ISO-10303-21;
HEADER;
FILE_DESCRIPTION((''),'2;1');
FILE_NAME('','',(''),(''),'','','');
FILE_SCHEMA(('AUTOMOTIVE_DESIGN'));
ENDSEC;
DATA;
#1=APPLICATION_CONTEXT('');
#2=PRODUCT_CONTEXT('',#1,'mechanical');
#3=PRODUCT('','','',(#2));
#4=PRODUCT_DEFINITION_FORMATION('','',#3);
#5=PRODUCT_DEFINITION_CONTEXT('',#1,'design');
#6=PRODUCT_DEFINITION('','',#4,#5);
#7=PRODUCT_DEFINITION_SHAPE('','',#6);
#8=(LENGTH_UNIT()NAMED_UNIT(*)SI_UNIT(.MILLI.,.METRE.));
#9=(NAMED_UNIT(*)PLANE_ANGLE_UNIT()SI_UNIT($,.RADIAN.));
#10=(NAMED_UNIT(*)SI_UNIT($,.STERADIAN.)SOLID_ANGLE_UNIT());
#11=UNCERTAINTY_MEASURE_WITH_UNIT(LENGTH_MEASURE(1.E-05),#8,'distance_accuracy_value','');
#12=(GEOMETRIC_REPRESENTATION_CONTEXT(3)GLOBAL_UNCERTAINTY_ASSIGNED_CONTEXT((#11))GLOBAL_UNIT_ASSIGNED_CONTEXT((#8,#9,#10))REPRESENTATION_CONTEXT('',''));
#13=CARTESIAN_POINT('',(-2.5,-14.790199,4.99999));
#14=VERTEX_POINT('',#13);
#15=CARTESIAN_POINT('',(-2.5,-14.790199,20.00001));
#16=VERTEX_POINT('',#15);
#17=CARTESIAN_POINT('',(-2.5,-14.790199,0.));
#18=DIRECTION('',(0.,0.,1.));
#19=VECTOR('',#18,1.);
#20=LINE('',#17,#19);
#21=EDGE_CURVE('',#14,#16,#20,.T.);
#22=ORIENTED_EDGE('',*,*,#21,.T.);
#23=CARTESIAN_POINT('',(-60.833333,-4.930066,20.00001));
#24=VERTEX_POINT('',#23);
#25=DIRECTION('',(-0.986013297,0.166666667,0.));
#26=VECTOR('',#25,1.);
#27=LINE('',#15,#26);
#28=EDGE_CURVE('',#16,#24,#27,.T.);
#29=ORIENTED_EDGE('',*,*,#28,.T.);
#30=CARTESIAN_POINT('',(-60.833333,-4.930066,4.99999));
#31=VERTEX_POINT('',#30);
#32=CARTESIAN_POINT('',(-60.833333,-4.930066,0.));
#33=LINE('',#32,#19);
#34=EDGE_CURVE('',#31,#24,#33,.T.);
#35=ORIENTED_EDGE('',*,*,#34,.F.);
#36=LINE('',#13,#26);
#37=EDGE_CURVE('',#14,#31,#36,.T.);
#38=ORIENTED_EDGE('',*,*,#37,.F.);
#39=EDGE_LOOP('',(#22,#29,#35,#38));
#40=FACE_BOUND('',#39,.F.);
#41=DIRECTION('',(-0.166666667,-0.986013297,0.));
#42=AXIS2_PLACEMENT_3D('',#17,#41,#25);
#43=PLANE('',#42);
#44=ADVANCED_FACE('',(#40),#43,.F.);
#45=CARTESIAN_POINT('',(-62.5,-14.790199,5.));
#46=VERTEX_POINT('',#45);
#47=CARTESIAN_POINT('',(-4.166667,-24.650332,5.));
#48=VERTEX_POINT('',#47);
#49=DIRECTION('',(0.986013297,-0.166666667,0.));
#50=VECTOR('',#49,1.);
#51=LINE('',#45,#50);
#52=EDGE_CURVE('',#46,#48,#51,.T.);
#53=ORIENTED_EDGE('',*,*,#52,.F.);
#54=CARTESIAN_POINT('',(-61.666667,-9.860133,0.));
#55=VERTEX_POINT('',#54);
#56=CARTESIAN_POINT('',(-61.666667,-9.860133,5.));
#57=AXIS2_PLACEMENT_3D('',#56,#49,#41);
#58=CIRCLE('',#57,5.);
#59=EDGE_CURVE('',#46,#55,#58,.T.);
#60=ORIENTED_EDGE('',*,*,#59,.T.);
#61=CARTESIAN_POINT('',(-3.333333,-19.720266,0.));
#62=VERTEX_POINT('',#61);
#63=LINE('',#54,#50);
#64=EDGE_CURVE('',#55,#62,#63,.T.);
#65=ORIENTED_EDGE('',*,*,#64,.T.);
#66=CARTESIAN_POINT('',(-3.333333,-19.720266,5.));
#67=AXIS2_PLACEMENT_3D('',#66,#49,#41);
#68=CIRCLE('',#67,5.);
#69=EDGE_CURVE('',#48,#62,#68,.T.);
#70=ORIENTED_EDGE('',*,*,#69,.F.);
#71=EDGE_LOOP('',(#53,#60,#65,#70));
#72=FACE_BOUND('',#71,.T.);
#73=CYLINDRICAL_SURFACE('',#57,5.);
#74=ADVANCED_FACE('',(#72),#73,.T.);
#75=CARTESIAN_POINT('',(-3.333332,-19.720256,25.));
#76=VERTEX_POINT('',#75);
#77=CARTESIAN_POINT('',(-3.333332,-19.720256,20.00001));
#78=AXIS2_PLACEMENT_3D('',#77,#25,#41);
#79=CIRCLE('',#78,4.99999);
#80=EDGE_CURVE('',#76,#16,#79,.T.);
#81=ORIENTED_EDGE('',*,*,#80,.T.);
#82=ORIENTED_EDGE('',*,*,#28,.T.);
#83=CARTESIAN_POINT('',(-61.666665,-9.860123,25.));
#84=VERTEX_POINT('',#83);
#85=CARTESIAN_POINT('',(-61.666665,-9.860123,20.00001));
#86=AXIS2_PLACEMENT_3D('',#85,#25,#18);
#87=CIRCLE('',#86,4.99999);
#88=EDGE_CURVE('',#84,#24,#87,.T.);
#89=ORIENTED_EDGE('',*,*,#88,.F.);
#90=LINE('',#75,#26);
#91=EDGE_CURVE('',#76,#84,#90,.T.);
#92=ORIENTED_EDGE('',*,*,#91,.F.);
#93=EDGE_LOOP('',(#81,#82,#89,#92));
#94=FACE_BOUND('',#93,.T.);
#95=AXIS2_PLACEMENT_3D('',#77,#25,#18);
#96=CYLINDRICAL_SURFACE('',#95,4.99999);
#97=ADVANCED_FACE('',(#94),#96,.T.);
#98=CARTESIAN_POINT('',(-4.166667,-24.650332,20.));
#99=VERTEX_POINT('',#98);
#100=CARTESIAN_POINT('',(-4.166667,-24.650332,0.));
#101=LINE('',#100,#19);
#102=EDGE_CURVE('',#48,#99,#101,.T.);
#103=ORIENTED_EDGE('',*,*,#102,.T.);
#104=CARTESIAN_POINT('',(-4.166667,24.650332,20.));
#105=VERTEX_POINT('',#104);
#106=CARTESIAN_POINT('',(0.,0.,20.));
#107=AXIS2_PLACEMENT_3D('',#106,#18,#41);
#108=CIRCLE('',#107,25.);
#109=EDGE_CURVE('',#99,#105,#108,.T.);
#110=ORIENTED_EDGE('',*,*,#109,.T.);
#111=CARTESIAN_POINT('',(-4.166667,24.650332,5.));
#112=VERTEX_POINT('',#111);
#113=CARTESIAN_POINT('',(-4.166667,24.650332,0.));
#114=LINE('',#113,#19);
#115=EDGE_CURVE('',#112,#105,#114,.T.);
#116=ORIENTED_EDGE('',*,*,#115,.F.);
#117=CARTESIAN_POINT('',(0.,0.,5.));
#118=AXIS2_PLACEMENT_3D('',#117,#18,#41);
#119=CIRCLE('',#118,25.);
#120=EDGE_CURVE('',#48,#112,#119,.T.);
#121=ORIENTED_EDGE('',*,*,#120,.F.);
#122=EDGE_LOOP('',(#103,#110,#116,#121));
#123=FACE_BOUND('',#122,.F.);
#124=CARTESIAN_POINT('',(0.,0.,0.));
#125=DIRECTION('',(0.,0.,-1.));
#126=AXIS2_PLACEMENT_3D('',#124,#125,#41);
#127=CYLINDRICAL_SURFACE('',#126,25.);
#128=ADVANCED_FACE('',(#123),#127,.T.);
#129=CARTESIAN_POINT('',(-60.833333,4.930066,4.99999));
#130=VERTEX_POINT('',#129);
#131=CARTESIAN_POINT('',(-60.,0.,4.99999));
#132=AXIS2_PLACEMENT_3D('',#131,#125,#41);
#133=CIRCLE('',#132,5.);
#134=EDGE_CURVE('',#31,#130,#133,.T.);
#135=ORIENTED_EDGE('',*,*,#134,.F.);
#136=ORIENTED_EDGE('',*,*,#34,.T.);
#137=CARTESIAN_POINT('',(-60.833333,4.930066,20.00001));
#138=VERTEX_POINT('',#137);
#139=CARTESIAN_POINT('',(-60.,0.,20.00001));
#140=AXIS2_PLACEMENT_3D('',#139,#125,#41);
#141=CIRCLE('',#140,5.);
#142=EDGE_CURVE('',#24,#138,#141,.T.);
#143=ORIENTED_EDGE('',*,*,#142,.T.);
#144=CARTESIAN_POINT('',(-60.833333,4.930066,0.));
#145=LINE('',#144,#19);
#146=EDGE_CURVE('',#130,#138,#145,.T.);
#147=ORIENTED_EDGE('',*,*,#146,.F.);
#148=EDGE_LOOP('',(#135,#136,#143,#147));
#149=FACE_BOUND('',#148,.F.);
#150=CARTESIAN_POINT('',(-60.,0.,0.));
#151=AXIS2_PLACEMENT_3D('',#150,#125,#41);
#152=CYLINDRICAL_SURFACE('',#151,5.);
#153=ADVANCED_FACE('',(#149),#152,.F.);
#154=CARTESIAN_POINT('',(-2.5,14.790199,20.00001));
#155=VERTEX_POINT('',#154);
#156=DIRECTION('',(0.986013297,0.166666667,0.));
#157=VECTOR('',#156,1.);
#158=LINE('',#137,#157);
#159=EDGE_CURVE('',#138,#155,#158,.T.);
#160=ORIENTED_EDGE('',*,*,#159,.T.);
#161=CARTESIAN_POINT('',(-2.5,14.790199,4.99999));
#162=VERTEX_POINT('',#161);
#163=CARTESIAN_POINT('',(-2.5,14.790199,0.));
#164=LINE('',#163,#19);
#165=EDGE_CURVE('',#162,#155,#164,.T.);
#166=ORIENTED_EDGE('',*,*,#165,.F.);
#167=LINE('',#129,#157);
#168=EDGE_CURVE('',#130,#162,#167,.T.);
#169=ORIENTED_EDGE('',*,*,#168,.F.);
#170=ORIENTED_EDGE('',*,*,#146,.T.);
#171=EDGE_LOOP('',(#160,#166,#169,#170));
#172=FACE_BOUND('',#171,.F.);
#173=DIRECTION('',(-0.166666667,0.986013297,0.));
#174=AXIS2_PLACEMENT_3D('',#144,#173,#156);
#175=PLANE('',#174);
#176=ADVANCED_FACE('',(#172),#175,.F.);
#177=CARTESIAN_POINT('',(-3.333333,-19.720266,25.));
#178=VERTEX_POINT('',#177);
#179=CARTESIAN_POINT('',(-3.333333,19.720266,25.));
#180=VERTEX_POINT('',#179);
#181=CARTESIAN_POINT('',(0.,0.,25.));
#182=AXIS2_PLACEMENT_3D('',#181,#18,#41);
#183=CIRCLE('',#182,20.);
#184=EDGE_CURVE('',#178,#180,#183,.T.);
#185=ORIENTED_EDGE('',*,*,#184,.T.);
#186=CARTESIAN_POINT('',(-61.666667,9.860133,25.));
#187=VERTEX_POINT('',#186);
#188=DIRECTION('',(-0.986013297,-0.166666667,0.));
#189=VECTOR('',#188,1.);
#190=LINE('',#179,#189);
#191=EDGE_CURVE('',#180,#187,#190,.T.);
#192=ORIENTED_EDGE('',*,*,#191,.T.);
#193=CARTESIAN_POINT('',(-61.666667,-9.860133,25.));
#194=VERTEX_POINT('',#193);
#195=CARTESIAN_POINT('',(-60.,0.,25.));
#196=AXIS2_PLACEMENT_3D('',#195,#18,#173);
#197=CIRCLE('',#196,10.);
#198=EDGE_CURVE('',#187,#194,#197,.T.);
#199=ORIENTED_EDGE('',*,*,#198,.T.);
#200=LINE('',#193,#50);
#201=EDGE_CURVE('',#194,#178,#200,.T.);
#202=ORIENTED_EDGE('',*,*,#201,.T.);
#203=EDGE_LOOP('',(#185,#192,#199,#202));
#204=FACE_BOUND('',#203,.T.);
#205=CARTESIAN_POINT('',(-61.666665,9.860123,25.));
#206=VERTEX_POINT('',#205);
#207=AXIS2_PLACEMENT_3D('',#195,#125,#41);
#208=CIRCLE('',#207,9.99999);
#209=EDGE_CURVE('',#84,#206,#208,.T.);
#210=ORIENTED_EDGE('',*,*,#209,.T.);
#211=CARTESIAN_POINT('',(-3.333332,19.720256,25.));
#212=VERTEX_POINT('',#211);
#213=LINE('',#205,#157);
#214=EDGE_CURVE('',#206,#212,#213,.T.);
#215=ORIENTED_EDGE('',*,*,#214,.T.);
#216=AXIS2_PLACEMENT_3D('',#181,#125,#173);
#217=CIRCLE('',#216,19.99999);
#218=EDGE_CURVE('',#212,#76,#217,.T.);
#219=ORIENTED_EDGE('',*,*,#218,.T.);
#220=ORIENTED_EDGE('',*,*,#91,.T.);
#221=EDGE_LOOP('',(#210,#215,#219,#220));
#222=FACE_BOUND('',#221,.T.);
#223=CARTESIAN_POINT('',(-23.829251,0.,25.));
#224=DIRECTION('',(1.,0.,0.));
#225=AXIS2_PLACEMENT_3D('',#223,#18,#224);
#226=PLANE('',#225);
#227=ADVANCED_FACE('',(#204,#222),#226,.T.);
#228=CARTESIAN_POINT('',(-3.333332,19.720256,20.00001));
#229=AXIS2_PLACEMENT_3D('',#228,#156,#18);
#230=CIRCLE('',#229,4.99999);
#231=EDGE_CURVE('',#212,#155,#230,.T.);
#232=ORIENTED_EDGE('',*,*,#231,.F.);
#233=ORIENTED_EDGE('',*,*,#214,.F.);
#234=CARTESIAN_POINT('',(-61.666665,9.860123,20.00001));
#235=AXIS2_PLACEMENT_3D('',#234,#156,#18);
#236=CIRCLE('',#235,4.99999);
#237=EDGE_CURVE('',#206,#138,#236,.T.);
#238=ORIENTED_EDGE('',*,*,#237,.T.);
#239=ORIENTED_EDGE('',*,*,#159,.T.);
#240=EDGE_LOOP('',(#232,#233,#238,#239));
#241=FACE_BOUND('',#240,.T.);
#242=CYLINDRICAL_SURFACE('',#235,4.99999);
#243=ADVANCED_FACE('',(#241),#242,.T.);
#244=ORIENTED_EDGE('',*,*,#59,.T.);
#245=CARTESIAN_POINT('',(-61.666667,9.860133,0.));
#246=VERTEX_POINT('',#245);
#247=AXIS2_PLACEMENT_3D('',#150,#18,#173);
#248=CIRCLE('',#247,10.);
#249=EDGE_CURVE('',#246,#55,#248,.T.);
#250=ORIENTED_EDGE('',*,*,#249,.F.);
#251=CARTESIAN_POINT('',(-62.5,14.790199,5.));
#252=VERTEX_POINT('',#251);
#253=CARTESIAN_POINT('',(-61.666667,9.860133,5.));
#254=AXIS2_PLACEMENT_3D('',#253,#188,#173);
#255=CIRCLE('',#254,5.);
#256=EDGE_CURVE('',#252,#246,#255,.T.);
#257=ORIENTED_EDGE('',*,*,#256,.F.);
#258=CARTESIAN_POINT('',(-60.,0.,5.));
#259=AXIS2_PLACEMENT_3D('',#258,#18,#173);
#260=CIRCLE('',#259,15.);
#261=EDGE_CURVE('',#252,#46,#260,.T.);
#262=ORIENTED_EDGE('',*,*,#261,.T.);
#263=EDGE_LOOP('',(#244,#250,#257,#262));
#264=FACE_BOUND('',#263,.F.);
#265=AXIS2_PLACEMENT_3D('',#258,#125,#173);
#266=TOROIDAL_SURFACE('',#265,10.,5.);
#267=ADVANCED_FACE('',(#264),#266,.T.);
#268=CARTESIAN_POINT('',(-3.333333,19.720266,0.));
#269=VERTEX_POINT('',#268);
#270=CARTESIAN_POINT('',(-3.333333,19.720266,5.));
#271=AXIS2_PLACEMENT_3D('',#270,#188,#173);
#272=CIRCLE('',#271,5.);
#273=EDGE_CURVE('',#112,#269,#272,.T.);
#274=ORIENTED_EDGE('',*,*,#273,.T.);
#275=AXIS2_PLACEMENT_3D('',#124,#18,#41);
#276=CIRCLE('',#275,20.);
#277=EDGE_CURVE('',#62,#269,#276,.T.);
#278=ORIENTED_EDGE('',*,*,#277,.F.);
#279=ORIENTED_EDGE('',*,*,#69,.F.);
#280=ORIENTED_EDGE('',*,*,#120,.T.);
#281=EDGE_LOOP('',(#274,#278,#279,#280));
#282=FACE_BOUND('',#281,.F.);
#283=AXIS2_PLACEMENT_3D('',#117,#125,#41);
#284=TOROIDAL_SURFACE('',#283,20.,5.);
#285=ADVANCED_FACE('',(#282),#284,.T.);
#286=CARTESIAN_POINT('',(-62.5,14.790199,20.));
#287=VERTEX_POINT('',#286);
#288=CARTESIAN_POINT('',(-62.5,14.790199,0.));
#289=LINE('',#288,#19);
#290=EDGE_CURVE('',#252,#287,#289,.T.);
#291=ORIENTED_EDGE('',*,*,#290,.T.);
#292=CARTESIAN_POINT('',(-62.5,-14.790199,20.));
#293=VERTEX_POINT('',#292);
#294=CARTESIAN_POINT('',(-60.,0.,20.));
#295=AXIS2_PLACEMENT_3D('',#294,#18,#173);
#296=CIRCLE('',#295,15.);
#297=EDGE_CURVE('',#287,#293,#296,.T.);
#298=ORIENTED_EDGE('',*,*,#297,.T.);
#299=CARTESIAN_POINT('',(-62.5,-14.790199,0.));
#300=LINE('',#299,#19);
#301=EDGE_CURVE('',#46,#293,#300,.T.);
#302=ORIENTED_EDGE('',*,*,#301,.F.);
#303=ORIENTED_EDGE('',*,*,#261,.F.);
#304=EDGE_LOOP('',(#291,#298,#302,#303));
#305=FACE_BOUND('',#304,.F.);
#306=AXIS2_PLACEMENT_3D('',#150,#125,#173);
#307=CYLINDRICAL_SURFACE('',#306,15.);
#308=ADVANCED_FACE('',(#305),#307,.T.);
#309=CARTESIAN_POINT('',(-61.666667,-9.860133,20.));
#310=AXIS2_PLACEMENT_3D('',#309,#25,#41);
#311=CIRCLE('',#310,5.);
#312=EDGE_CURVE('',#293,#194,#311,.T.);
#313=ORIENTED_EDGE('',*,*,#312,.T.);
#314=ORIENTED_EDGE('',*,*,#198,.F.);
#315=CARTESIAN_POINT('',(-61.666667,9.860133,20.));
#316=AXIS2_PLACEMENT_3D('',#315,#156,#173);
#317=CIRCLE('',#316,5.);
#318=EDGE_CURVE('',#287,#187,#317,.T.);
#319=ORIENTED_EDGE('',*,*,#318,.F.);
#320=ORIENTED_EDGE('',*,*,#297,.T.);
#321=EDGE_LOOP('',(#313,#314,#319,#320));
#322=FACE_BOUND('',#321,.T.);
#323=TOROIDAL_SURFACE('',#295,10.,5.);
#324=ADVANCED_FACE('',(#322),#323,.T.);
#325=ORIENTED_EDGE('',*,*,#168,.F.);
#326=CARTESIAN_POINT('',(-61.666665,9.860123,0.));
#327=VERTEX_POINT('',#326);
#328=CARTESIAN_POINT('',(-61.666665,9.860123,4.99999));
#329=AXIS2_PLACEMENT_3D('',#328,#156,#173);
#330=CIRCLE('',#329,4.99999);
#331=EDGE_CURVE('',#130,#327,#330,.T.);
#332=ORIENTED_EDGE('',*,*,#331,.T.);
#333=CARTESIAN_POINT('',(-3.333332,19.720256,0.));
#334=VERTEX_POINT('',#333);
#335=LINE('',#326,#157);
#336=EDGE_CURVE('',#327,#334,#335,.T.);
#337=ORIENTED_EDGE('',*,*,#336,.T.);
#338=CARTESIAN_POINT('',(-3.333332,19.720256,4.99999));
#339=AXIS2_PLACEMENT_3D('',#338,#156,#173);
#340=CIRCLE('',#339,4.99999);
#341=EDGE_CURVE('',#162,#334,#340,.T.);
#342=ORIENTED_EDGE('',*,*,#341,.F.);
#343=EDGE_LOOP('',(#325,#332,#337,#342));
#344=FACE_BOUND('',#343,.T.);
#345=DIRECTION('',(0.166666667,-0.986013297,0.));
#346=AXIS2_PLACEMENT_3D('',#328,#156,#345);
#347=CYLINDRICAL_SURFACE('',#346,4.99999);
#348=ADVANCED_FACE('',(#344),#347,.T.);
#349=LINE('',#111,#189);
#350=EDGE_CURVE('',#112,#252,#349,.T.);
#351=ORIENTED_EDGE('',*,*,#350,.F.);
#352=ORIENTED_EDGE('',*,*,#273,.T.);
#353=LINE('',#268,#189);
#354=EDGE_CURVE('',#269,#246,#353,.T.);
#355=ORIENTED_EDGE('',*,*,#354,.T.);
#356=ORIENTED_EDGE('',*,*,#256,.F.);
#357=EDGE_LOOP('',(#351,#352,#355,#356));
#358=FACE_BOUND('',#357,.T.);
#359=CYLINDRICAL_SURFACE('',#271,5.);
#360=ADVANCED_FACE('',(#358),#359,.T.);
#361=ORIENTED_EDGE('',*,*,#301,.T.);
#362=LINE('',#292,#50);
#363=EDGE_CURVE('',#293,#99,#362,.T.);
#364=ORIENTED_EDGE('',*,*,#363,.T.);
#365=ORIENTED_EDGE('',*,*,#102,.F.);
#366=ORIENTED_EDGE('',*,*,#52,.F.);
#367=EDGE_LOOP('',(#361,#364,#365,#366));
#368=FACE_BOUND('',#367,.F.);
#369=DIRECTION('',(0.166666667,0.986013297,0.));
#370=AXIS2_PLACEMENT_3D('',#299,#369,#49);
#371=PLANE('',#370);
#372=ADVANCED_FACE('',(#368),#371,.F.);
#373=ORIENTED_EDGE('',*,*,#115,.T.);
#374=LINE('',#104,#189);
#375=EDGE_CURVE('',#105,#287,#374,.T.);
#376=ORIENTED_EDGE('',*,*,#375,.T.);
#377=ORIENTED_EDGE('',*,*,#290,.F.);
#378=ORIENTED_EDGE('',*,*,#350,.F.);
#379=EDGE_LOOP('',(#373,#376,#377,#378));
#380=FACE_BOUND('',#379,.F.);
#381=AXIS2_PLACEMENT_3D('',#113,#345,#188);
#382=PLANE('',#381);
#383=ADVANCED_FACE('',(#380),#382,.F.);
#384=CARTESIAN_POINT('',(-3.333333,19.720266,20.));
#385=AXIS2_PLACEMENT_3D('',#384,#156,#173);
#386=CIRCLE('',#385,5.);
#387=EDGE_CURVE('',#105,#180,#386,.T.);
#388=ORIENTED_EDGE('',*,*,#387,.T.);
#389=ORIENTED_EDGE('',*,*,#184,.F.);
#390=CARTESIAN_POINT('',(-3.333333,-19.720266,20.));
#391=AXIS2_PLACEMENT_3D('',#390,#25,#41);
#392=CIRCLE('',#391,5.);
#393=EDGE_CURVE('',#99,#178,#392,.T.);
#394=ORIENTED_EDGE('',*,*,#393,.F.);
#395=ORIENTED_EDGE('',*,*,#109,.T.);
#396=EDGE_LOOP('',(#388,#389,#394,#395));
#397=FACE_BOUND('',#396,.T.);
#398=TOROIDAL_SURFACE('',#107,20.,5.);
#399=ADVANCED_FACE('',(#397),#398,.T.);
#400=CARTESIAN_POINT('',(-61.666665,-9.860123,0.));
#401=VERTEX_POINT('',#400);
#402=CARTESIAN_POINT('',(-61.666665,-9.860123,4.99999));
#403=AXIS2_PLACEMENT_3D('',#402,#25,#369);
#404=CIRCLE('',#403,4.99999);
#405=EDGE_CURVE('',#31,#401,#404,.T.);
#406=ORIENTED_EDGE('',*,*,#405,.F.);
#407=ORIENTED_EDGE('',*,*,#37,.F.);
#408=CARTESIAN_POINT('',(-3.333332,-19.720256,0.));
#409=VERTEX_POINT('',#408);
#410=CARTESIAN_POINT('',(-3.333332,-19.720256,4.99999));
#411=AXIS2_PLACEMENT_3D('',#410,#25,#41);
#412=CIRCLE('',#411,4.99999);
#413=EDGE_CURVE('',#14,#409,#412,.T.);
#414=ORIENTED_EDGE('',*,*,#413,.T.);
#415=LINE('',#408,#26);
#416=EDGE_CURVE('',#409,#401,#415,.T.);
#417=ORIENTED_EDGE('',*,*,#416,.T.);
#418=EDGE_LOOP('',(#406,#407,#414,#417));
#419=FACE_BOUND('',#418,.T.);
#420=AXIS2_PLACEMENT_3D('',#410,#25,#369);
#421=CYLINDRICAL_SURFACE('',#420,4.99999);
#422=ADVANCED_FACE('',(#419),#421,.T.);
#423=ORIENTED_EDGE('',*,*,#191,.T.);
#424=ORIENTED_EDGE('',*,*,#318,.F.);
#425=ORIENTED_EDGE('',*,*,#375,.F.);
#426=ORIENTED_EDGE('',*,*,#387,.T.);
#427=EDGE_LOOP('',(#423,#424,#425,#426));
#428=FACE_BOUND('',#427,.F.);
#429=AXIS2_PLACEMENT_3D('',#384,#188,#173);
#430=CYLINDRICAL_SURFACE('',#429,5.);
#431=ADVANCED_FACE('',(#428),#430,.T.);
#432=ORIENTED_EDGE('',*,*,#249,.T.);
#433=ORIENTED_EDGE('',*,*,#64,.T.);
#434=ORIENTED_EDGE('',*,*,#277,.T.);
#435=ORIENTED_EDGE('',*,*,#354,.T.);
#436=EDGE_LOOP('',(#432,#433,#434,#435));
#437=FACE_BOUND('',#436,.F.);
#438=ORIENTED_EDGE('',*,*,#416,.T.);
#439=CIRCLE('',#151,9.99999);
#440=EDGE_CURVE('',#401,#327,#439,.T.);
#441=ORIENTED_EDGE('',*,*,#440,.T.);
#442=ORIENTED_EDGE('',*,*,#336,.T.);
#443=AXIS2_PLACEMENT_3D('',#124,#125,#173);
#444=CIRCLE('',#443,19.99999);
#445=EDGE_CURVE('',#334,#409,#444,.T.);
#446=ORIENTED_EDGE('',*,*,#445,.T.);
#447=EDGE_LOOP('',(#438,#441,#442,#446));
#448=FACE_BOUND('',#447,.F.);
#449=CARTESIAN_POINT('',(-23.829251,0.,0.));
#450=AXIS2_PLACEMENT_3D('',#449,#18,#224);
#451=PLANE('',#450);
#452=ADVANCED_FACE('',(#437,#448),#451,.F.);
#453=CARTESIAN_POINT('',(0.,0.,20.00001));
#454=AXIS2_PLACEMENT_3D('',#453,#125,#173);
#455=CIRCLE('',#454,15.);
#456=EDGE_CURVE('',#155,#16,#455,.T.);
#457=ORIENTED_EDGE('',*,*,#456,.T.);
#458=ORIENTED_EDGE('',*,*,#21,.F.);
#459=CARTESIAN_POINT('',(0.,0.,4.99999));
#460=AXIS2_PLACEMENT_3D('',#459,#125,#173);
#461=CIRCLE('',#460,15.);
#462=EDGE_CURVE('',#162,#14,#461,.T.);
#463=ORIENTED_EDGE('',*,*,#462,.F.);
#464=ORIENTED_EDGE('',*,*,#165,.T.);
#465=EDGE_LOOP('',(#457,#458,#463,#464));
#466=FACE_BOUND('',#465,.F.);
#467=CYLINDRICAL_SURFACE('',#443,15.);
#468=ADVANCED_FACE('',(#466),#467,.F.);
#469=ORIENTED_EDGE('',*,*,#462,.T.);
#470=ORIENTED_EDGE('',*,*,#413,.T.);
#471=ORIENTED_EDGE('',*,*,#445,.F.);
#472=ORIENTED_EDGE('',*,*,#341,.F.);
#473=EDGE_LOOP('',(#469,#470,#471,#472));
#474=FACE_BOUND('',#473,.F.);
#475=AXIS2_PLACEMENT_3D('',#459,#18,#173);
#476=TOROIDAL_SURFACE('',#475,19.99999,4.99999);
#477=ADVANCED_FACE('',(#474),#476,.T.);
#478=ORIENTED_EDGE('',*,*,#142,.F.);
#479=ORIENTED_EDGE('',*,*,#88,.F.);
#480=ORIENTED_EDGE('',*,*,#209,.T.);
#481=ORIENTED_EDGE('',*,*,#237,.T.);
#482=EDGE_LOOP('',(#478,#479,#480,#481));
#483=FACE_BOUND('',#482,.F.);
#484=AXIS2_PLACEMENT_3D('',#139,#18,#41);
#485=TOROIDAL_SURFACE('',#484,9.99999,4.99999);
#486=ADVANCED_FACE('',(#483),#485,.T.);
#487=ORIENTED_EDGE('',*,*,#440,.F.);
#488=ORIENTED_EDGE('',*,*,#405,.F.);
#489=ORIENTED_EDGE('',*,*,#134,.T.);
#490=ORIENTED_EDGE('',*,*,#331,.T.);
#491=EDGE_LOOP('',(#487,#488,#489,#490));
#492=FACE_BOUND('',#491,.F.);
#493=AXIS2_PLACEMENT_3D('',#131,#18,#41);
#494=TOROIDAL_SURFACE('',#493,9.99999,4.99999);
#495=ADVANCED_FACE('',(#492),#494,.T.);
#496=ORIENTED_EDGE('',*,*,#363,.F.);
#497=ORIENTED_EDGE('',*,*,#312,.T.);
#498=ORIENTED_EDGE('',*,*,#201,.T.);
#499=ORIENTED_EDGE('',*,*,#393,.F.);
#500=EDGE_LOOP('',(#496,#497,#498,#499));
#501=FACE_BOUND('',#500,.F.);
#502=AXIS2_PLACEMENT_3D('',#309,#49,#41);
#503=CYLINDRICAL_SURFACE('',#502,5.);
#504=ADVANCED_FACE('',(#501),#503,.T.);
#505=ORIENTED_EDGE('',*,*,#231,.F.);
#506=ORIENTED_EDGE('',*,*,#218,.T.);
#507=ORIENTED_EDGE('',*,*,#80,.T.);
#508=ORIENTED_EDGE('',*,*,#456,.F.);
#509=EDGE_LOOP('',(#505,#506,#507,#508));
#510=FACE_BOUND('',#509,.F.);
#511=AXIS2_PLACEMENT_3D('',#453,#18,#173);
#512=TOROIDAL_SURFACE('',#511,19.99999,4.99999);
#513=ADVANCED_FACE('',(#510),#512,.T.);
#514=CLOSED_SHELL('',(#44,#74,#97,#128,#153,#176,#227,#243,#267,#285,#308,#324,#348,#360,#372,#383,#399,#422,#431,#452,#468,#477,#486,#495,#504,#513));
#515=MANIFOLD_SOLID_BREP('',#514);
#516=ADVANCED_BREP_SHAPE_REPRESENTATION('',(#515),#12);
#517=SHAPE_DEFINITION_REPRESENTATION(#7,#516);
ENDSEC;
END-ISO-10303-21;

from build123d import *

# Parameters (mm, degrees)
F1_DEPTH = 25
F2_R     = 5
F3_R     = 4.99999
F4_R     = 4.99999


# Not quite as in the source:
# - a fillet or chamfer is up to 0.001 mm smaller than in the source, because OpenCascade refuses the exact size


with BuildPart() as f1:
    # F0 (on Top) → F1 (new body)
    with BuildSketch(Plane.XY):
        with BuildLine():
            Line((-4.1666666667, 24.6503324296), (-62.5, 14.7901994577))
            ThreePointArc((-62.5, 14.7901994577), (-75, 0), (-62.5, -14.7901994577))
            Line((-62.5, -14.7901994577), (-4.1666666667, -24.6503324296))
            ThreePointArc((-4.1666666667, -24.6503324296), (25, 0), (-4.1666666667, 24.6503324296))
        make_face()
        with BuildLine():
            Line((-60.8333333333, 4.9300664859), (-2.5, 14.7901994577))
            ThreePointArc((-2.5, 14.7901994577), (15, 0), (-2.5, -14.7901994577))
            Line((-2.5, -14.7901994577), (-60.8333333333, -4.9300664859))
            ThreePointArc((-60.8333333333, -4.9300664859), (-65, 0), (-60.8333333333, 4.9300664859))
        make_face(mode=Mode.SUBTRACT)
    extrude(amount=F1_DEPTH)

    # F2
    f2_edges = [f1.edges().sort_by_distance(p)[0] for p in [
        (-33.333333, -19.720266, 25),
        (25, 0, 25),
        (-33.333333, -19.720266, 0),
        (25, 0, 0),
    ]]
    fillet(f2_edges, radius=F2_R)

    # F3 (radius 5 in the source; OpenCascade refuses exactly that, so slightly less here)
    f3_edges = [f1.edges().sort_by_distance(p)[0] for p in [
        (-31.666667, 9.860133, 25),
    ]]
    fillet(f3_edges, radius=F3_R)

    # F4 (radius 5 in the source; OpenCascade refuses exactly that, so slightly less here)
    f4_edges = [f1.edges().sort_by_distance(p)[0] for p in [
        (15, 0, 0),
        (-31.666667, 9.860133, 0),
    ]]
    fillet(f4_edges, radius=F4_R)


solid = f1.part
